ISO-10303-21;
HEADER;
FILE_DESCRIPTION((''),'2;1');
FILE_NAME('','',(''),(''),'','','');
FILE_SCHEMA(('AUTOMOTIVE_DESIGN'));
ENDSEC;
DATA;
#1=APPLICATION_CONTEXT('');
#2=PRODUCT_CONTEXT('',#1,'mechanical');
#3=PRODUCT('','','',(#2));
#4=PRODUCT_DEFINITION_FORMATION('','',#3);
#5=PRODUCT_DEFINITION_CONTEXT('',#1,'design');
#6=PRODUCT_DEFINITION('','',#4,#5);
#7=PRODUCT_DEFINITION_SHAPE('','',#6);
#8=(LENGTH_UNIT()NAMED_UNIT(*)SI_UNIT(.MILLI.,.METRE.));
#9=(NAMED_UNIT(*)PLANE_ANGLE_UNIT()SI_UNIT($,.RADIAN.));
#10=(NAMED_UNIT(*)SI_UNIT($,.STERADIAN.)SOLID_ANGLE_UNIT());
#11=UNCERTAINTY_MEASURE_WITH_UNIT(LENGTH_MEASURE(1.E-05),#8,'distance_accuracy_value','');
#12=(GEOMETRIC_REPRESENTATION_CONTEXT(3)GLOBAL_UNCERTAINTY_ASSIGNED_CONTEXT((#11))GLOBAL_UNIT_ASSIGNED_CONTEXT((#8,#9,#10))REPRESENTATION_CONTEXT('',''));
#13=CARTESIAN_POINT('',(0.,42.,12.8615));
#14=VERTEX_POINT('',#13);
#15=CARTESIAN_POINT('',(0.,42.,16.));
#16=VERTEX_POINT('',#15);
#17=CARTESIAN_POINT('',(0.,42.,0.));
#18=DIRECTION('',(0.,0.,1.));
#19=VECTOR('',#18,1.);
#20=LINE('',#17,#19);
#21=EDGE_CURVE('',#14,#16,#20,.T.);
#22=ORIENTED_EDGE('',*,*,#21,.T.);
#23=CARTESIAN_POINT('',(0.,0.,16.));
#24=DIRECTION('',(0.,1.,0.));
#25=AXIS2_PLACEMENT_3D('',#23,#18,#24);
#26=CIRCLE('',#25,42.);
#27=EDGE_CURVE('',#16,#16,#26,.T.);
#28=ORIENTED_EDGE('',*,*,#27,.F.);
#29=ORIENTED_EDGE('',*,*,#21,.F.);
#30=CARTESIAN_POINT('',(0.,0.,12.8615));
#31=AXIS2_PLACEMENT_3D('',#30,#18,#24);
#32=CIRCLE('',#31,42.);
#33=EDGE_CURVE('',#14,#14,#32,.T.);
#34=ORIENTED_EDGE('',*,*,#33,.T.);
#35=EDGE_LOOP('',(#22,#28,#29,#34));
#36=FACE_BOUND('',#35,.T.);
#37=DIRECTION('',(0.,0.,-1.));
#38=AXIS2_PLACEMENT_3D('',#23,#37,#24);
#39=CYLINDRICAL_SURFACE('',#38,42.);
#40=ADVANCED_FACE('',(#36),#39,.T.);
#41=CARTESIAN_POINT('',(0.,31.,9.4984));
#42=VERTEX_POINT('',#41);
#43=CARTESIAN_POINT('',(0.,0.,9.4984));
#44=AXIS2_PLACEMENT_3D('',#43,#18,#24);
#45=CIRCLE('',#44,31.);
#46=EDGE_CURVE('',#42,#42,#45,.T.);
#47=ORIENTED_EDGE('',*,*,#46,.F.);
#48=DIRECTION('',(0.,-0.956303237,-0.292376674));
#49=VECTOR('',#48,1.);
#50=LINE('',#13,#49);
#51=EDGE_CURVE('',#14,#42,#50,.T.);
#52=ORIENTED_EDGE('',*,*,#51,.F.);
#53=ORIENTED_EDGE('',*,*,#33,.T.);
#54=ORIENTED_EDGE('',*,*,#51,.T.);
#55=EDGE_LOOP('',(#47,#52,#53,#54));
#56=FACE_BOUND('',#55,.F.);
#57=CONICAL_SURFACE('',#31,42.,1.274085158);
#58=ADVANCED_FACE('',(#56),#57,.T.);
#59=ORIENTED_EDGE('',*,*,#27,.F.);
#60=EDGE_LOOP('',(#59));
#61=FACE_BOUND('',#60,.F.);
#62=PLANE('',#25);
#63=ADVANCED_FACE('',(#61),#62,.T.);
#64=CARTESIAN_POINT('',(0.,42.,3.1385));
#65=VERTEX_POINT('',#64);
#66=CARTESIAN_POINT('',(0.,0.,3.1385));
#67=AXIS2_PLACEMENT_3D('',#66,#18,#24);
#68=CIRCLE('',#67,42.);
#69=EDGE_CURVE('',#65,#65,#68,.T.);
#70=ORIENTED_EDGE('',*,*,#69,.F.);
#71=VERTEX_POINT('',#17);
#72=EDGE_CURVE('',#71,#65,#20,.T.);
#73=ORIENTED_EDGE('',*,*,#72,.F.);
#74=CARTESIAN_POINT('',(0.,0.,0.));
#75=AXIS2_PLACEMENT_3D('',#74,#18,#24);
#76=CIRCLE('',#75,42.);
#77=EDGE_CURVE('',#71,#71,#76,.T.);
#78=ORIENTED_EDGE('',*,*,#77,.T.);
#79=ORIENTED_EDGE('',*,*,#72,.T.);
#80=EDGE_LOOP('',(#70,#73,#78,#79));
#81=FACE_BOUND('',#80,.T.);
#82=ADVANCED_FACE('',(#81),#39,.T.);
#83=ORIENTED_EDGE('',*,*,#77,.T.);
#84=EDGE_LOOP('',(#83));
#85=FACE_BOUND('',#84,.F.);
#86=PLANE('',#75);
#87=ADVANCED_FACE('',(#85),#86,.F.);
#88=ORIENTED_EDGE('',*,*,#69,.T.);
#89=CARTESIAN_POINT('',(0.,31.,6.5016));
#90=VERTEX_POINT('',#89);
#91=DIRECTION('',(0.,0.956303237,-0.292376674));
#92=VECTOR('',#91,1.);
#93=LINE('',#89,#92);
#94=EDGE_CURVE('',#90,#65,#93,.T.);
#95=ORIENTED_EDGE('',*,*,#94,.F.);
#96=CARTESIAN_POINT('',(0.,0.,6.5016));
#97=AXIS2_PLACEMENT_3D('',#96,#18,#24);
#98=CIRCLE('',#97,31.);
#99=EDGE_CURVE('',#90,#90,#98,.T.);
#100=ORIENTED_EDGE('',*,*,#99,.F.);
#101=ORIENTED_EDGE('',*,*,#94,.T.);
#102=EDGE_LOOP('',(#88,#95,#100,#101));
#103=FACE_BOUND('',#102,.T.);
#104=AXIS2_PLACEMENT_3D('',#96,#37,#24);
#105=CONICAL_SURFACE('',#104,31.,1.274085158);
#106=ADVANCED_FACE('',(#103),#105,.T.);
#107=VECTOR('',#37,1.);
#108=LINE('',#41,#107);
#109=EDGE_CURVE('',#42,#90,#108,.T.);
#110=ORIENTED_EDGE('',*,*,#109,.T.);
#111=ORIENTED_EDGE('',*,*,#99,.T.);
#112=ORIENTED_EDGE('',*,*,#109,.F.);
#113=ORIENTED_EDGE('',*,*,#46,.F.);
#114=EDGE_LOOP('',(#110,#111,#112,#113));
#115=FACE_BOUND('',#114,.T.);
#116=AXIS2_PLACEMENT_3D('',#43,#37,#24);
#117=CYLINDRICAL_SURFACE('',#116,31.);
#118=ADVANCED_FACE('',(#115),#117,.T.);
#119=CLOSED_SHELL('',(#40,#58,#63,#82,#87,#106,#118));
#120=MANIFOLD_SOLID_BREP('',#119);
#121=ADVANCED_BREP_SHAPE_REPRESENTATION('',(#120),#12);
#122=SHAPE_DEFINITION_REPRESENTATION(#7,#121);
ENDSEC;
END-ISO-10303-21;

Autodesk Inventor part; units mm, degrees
ref_plane "YZ Plane" through (0, 0, 0) normal (1, 0, 0) x (0, 1, 0)
ref_plane "XZ Plane" through (0, 0, 0) normal (0, 1, 0) x (-1, 0, 0)
sketch "Boceto principal" plane through (0, 0, 0) normal (1, 0, 0) x (0, 1, 0)
  line L0 (0, 16) -> (42, 16)
  line L1 (42, 16) -> (42, 12.8615)
  line L2 (42, 12.8615) -> (31, 9.4984)
  line L3 (31, 9.4984) -> (31, 6.5016)
  line L4 (31, 6.5016) -> (42, 3.1385)
  line L5 (42, 3.1385) -> (42, 0)
  line L6 (42, 0) -> (0, 0)
  line L7 (40, 12.25) -> (40, 3.75) construction
  line L8 (31, 8) -> (40, 8) construction
  line L9 (42, 12.8615) -> (42, 3.1385)
  line L10 (0, -10.6704) -> (0, 48.4451) projected
  line L11 (0, 0) -> (0, 16)
  dimension "d0" = 8.5
  dimension "d1" = 34
  dimension "d2" = 2
  dimension "d6" = 16
  dimension "d21" = 80
  dimension "d25" = 11
  dimension "d27" = 8
ref_plane "Plano de correa" through (0, 31, 8) normal (0, 0, 1) x (1, 0, 0)
revolve "Cuerpo" add sketch "Boceto principal" angle 360 about axis through (0, 0, -10) along (0, 0, 1)
revolve "Para ranuras" cut sketch "Boceto principal" angle 360 about axis through (0, 0, -10) along (0, 0, 1) contours L9 L4 L3 L2
fillet "Empalme externo" [suppressed]
fillet "Empalme interno" [suppressed]
pattern_of_one "Patrón para ranuras"
equation "\"d0\" = da_Bw"
equation "\"d1\" = da_Alfa"
equation "\"d2\" = da_c"
equation "\"d21\" = da_Dw"
equation "\"d25\" = da_Hd"
equation "\"d27\" = da_Se"
equation "\"da_r1\" = 0"
equation "\"da_r2\" = 0"
equation "\"d18\" = da_Sg"
equation "\"d5\" = da_Se"
equation "\"da_Bw\" = 8.5"
equation "\"da_Alfa\" = 34deg"
equation "\"da_c\" = 2"
equation "\"da_Dw\" = 80"
equation "\"da_Hd\" = 11"
equation "\"da_Se\" = 8"
equation "\"da_Sg\" = 12"
properties part number "Polea ranurada1" material "Steel"
